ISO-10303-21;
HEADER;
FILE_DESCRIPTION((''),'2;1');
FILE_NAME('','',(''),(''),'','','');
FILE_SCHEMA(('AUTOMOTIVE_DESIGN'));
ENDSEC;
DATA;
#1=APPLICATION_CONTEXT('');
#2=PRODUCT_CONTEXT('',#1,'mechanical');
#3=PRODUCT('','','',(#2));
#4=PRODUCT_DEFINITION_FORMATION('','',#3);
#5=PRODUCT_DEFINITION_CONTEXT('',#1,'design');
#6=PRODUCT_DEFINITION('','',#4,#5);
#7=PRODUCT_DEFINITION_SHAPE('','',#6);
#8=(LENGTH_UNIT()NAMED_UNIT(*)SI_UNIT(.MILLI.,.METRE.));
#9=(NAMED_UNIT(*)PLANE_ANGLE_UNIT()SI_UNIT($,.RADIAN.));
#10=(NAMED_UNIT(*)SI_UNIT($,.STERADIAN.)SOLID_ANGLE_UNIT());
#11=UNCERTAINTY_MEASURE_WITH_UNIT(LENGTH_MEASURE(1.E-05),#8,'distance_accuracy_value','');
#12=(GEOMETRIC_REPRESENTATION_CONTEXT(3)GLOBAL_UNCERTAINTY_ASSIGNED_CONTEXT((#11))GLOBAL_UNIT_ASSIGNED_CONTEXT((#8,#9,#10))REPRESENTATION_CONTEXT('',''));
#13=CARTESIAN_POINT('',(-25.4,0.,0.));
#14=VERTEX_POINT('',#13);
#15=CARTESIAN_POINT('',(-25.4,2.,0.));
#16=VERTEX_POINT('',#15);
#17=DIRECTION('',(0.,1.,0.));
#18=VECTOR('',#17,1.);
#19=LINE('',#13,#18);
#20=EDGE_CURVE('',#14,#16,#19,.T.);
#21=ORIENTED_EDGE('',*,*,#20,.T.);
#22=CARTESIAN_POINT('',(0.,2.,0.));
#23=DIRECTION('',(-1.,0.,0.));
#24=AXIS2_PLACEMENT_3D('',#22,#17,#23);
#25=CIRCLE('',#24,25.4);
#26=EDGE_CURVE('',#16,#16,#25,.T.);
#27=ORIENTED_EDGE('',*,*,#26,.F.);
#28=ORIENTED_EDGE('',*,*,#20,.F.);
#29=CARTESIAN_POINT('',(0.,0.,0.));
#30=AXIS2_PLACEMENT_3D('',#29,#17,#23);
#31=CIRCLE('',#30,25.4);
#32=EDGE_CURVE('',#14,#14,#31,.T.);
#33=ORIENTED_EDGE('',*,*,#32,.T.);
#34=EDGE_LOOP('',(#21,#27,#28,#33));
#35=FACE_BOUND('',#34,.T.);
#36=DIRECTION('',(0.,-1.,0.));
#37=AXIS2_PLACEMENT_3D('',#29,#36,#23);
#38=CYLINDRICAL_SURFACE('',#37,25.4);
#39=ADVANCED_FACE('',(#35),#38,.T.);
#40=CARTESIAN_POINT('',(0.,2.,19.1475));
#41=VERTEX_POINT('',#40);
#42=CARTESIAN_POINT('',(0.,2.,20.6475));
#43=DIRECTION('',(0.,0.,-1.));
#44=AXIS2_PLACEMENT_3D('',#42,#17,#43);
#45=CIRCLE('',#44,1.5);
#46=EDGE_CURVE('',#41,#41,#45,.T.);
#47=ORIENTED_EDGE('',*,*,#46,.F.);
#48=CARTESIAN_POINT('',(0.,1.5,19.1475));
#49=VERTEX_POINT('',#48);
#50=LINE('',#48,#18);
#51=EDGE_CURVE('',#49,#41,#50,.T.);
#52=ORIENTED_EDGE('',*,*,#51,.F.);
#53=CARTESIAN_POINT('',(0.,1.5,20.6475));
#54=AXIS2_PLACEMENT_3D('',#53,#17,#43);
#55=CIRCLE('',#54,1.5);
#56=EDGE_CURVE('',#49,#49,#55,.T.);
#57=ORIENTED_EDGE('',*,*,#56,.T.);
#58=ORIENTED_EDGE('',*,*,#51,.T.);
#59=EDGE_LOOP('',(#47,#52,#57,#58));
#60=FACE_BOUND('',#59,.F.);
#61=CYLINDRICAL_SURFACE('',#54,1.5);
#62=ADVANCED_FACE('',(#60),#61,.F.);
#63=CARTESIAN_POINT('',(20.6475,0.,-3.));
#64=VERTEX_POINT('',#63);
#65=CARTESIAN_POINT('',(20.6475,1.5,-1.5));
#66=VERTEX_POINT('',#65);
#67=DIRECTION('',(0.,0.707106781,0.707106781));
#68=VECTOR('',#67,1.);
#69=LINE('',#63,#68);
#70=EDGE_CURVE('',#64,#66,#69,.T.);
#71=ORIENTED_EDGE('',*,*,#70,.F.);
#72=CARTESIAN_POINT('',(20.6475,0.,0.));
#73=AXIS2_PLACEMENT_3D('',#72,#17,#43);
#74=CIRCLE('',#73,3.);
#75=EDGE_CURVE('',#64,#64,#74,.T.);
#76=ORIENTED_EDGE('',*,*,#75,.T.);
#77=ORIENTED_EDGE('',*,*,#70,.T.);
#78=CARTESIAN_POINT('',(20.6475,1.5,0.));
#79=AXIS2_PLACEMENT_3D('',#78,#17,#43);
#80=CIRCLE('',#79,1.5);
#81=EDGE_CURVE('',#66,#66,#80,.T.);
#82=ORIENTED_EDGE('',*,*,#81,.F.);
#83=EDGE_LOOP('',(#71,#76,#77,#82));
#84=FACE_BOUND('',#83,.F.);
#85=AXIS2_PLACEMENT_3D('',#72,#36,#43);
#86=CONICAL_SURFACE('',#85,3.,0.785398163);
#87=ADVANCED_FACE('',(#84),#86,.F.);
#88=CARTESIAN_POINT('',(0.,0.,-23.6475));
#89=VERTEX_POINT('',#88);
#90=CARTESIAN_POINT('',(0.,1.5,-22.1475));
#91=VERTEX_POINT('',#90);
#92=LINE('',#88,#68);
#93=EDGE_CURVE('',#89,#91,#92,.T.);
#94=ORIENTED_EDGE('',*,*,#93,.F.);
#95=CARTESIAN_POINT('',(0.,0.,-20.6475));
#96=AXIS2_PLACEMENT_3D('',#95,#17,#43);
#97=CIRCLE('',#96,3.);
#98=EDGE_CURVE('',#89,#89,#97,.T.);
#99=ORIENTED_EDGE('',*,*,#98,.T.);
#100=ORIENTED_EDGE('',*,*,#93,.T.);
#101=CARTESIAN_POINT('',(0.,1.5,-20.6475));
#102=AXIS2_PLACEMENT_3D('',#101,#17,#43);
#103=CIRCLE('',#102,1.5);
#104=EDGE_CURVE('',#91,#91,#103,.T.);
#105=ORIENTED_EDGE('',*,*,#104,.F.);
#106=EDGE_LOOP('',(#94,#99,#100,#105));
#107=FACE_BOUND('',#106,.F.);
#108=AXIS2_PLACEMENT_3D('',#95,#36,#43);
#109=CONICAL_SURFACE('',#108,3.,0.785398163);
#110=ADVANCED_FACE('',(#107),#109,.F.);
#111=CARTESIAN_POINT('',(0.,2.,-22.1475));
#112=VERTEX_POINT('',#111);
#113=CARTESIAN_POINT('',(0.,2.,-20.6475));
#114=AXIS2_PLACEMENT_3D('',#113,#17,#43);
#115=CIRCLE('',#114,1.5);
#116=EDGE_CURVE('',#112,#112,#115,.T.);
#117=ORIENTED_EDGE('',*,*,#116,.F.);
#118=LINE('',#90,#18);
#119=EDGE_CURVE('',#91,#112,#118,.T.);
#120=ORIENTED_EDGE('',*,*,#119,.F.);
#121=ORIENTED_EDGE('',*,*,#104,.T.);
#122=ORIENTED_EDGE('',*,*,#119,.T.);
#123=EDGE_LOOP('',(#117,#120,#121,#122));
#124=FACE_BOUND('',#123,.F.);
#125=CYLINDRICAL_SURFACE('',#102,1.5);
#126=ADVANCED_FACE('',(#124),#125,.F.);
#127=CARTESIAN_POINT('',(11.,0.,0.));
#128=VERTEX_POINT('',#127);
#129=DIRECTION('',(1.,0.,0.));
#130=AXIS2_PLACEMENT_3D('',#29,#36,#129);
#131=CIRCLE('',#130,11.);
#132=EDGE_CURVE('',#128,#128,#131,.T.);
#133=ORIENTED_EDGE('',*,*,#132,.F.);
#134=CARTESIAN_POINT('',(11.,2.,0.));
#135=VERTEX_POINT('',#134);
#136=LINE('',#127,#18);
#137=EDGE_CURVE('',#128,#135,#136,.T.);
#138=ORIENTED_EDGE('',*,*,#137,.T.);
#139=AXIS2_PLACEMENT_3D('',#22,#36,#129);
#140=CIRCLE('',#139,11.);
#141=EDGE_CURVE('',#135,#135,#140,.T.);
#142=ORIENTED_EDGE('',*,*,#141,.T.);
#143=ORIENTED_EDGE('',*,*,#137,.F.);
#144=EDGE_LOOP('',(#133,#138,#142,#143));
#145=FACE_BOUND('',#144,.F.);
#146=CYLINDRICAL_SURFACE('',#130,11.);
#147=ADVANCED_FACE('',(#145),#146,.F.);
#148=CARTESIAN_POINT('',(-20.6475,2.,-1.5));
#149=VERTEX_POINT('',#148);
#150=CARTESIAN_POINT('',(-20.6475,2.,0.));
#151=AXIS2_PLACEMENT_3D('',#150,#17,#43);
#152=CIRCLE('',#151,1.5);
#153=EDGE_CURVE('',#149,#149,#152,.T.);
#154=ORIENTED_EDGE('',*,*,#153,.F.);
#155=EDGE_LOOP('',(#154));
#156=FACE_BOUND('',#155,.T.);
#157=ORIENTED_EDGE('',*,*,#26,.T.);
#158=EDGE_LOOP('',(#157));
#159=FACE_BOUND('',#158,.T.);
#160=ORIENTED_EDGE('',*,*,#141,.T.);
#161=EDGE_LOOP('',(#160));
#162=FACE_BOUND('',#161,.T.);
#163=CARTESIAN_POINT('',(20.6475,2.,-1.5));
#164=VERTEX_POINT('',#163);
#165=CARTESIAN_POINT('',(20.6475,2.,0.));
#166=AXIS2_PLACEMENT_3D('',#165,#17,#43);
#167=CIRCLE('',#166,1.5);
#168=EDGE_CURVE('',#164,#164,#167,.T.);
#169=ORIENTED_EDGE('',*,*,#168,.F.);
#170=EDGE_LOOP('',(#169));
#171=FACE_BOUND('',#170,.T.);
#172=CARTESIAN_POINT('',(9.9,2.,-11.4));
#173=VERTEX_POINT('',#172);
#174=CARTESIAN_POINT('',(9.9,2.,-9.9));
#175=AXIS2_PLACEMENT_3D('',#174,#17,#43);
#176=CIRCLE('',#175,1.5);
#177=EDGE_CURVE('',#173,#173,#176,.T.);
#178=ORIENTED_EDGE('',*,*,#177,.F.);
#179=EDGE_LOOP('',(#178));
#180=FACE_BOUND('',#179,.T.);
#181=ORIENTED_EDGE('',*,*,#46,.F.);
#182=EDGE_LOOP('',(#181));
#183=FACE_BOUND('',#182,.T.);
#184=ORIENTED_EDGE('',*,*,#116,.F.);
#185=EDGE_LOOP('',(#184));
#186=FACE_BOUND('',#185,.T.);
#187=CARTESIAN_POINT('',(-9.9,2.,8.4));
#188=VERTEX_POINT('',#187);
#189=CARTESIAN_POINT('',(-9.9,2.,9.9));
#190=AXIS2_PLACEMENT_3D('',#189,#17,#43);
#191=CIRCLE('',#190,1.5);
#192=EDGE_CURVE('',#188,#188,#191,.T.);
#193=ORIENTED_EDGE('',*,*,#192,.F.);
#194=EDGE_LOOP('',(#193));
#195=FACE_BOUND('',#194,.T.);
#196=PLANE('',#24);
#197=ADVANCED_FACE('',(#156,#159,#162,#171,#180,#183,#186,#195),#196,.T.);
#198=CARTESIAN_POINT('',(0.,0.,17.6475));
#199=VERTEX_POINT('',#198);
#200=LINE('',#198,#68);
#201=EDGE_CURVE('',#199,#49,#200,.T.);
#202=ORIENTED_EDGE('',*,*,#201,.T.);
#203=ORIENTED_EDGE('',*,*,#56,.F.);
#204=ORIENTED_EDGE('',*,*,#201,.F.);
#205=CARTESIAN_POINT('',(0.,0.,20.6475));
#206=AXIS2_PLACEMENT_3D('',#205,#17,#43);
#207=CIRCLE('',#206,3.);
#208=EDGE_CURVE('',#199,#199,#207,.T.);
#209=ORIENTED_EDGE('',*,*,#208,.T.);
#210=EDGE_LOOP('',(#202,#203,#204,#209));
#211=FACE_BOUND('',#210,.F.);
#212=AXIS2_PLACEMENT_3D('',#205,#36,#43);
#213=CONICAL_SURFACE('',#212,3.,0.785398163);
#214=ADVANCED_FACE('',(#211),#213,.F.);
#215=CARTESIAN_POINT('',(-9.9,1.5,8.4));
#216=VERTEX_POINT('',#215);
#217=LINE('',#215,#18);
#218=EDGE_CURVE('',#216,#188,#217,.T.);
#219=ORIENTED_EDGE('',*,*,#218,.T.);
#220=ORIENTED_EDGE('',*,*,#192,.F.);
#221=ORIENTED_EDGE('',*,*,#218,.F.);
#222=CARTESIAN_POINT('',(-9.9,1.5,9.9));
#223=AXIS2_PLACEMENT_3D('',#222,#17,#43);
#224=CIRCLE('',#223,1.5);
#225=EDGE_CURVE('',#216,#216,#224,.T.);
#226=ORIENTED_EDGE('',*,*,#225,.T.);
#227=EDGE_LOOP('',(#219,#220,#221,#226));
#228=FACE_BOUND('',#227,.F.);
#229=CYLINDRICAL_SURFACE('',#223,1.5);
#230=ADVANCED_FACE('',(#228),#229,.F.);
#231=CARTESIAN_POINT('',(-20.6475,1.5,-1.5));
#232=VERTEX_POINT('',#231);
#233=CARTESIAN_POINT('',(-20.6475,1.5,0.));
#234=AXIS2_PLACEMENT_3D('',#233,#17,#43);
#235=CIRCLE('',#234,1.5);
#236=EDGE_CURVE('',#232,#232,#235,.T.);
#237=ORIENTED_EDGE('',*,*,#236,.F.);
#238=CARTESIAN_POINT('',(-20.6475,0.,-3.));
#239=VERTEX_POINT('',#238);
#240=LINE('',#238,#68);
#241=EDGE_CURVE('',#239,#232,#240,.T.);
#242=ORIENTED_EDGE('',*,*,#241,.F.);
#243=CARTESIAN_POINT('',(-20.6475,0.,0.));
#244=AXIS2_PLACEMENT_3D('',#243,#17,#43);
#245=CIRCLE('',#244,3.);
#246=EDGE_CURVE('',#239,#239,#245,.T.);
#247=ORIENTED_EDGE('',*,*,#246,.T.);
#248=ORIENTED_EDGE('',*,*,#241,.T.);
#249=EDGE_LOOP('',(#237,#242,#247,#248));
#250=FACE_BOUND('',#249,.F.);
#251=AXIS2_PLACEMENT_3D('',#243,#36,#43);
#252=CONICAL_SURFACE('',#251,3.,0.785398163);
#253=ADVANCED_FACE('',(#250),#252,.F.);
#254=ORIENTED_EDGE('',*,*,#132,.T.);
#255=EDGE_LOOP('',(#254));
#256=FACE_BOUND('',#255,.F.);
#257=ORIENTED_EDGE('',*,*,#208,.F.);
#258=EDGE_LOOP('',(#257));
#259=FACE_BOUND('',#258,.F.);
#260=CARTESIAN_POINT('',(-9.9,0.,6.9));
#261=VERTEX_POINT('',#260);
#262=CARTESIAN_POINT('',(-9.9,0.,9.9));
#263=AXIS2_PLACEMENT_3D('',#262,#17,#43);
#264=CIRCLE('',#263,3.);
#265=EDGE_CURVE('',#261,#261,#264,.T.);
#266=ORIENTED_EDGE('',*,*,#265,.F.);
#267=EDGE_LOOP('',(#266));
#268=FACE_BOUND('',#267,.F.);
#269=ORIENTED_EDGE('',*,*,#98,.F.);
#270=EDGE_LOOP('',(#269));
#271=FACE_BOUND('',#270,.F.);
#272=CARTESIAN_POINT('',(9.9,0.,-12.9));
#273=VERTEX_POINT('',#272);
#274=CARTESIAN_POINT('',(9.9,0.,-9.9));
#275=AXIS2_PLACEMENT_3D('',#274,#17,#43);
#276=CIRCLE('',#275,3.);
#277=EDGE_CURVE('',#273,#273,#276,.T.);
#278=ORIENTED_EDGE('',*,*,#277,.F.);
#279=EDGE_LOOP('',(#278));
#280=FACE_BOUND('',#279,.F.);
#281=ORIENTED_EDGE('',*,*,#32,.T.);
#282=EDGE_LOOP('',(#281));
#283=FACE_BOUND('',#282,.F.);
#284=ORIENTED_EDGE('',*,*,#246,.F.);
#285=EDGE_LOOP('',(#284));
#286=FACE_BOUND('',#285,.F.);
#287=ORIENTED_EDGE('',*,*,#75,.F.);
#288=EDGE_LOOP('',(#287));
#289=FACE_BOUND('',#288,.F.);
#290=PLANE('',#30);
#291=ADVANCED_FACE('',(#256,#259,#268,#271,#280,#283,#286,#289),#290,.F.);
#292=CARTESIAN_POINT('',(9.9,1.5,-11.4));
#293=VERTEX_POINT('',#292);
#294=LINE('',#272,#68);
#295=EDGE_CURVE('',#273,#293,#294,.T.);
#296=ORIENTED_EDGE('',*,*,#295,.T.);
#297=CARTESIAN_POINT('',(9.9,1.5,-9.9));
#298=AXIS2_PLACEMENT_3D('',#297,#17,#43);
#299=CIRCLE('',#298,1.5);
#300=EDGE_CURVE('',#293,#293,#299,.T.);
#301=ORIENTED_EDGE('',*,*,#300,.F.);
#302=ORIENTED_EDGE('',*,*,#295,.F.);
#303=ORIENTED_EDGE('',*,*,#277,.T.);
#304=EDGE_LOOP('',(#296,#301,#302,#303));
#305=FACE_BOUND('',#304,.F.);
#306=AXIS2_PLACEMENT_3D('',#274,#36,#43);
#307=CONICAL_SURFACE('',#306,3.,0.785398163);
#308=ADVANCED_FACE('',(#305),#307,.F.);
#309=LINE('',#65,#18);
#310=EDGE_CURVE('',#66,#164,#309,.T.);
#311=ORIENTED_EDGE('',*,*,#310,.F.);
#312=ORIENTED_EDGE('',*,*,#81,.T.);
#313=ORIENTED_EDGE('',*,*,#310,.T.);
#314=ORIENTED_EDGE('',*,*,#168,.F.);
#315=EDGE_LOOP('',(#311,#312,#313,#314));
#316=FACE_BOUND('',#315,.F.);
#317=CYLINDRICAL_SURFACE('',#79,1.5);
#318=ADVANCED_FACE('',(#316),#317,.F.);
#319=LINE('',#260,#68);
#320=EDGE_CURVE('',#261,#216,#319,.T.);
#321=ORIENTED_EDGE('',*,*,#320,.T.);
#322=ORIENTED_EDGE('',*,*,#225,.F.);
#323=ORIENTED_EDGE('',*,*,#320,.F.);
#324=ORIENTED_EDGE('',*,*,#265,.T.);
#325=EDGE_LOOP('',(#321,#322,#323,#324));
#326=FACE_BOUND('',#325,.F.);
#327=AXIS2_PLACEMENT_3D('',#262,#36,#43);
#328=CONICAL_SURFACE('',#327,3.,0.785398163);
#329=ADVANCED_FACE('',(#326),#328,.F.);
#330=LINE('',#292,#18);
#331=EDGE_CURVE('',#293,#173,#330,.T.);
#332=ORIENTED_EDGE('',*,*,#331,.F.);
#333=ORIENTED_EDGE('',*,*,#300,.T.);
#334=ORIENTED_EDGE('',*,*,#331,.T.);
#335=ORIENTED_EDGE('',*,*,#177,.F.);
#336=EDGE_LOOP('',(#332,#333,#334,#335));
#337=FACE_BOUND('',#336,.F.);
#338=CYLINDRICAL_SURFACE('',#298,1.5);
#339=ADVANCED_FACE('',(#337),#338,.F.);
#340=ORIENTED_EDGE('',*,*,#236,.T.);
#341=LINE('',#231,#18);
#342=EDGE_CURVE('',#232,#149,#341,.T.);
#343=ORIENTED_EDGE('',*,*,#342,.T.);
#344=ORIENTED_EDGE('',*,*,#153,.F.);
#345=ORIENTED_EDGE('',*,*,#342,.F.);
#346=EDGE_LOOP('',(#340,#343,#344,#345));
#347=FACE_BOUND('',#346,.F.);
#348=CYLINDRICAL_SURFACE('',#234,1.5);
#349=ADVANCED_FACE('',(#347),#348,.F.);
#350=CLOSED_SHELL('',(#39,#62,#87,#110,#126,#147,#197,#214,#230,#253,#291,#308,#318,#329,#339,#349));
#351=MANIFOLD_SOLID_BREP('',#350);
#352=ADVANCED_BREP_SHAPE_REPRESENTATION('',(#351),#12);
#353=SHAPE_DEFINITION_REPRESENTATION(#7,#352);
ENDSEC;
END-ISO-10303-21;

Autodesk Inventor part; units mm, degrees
ref_plane "YZ Plane" through (0, 0, 0) normal (1, 0, 0) x (0, 1, 0)
ref_plane "XZ Plane" through (0, 0, 0) normal (0, 1, 0) x (-1, 0, 0)
ref_plane "XY Plane" through (0, 0, 0) normal (0, 0, 1) x (1, 0, 0)
sketch "Skizze1" plane through (0, 0, 0) normal (0, 1, 0) x (-1, 0, 0)
  circle A0 centre (0, 0) radius 25.4
  dimension "d0" = 50.8
extrude "Extrusion1" add sketch "Skizze1" along normal blind 2
sketch "Skizze2" plane through (0, 0, 0) normal (0, -1, 0) x (1, 0, 0)
  circle A0 centre (0, 0) radius 25.4 projected
  line L0 (-20.6475, 0) -> (0, 20.6475) construction
  line L1 (0, 20.6475) -> (20.6475, 0) construction
  line L2 (20.6475, 0) -> (0, -20.6475) construction
  line L3 (0, -20.6475) -> (-20.6475, 0) construction
  line L4 (0, 0) -> (10.3238, 10.3238) construction
  line L5 (0, 0) -> (-10.3238, 10.3238) construction
  circle A1 centre (0, 0) radius 25.4 construction
  line L6 (0, 0) -> (0, 25.4) construction
  point P0 (-20.6475, 0)
  point P1 (0, 20.6475)
  point P2 (20.6475, 0)
  dimension "d3" = 29.2
  dimension "d4" = 29.2
  dimension "d63" = 45
hole "Bohrung1" at (-20.6475, 0, 0) at (0, 0, 20.6475) at (20.6475, 0, 0) at (0, 0, -20.6475) direction (0, 1, 0) diameter 3 end through all countersink diameter 6 countersink angle 90
sketch "Skizze9" plane through (0, 0, 0) normal (0, -1, 0) x (1, 0, 0)
  circle A0 centre (0, 0) radius 25.4 projected
  circle A1 centre (0, 0) radius 11
  dimension "d53" = 22
extrude "Extrusion7" cut sketch "Skizze9" against normal up to next contours A1
sketch "Skizze7" plane through (0, 0, 0) normal (0, -1, 0) x (1, 0, 0)
  circle A0 centre (0, 0) radius 25.4 construction
  line L0 (-9.9, 9.9) -> (9.9, 9.9) construction
  line L1 (9.9, 9.9) -> (9.9, -9.9) construction
  line L2 (9.9, -9.9) -> (-9.9, -9.9) construction
  line L3 (-9.9, -9.9) -> (-9.9, 9.9) construction
  line L4 (-9.9, 0) -> (9.9, 0) construction
  dimension "d42" = 19.8
  dimension "d43" = 19.8
hole "Bohrung3" at (-9.9, 0, 9.9) at (9.9, 0, -9.9) direction (0, 1, 0) diameter 3 end through all countersink diameter 6 countersink angle 90
sketch "Skizze10" plane through (0, 0, 0) normal (0, -1, 0) x (1, 0, 0)
  circle A0 centre (0, 0) radius 25.4 projected
  line L0 (-12.55, 16.2) -> (12.55, 16.2)
  line L1 (12.55, 16.2) -> (12.55, -12.5)
  line L2 (12.55, -12.5) -> (-12.55, -12.5)
  line L3 (-12.55, -12.5) -> (-12.55, 16.2)
  line L4 (0, 16.2) -> (0, -12.5) construction
  line L5 (-7, -12.5) -> (-5, -12.5) construction
  line L6 (-5, -12.5) -> (-5, -14.5)
  line L7 (-5, -14.5) -> (-7, -14.5)
  line L8 (-7, -14.5) -> (-7, -12.5)
  line L9 (5, -12.5) -> (7, -12.5) construction
  line L10 (7, -12.5) -> (7, -14.5)
  line L11 (7, -14.5) -> (5, -14.5)
  line L12 (5, -14.5) -> (5, -12.5)
  line L13 (-5, -12.5) -> (5, -12.5) construction
  dimension "d56" = 25.1
  dimension "d57" = 28.7
  dimension "d58" = 12.5
  dimension "d59" = 2
  dimension "d60" = 2
  dimension "d61" = 10
  dimension "d62" = 2
properties part number "anschluss_daten"
